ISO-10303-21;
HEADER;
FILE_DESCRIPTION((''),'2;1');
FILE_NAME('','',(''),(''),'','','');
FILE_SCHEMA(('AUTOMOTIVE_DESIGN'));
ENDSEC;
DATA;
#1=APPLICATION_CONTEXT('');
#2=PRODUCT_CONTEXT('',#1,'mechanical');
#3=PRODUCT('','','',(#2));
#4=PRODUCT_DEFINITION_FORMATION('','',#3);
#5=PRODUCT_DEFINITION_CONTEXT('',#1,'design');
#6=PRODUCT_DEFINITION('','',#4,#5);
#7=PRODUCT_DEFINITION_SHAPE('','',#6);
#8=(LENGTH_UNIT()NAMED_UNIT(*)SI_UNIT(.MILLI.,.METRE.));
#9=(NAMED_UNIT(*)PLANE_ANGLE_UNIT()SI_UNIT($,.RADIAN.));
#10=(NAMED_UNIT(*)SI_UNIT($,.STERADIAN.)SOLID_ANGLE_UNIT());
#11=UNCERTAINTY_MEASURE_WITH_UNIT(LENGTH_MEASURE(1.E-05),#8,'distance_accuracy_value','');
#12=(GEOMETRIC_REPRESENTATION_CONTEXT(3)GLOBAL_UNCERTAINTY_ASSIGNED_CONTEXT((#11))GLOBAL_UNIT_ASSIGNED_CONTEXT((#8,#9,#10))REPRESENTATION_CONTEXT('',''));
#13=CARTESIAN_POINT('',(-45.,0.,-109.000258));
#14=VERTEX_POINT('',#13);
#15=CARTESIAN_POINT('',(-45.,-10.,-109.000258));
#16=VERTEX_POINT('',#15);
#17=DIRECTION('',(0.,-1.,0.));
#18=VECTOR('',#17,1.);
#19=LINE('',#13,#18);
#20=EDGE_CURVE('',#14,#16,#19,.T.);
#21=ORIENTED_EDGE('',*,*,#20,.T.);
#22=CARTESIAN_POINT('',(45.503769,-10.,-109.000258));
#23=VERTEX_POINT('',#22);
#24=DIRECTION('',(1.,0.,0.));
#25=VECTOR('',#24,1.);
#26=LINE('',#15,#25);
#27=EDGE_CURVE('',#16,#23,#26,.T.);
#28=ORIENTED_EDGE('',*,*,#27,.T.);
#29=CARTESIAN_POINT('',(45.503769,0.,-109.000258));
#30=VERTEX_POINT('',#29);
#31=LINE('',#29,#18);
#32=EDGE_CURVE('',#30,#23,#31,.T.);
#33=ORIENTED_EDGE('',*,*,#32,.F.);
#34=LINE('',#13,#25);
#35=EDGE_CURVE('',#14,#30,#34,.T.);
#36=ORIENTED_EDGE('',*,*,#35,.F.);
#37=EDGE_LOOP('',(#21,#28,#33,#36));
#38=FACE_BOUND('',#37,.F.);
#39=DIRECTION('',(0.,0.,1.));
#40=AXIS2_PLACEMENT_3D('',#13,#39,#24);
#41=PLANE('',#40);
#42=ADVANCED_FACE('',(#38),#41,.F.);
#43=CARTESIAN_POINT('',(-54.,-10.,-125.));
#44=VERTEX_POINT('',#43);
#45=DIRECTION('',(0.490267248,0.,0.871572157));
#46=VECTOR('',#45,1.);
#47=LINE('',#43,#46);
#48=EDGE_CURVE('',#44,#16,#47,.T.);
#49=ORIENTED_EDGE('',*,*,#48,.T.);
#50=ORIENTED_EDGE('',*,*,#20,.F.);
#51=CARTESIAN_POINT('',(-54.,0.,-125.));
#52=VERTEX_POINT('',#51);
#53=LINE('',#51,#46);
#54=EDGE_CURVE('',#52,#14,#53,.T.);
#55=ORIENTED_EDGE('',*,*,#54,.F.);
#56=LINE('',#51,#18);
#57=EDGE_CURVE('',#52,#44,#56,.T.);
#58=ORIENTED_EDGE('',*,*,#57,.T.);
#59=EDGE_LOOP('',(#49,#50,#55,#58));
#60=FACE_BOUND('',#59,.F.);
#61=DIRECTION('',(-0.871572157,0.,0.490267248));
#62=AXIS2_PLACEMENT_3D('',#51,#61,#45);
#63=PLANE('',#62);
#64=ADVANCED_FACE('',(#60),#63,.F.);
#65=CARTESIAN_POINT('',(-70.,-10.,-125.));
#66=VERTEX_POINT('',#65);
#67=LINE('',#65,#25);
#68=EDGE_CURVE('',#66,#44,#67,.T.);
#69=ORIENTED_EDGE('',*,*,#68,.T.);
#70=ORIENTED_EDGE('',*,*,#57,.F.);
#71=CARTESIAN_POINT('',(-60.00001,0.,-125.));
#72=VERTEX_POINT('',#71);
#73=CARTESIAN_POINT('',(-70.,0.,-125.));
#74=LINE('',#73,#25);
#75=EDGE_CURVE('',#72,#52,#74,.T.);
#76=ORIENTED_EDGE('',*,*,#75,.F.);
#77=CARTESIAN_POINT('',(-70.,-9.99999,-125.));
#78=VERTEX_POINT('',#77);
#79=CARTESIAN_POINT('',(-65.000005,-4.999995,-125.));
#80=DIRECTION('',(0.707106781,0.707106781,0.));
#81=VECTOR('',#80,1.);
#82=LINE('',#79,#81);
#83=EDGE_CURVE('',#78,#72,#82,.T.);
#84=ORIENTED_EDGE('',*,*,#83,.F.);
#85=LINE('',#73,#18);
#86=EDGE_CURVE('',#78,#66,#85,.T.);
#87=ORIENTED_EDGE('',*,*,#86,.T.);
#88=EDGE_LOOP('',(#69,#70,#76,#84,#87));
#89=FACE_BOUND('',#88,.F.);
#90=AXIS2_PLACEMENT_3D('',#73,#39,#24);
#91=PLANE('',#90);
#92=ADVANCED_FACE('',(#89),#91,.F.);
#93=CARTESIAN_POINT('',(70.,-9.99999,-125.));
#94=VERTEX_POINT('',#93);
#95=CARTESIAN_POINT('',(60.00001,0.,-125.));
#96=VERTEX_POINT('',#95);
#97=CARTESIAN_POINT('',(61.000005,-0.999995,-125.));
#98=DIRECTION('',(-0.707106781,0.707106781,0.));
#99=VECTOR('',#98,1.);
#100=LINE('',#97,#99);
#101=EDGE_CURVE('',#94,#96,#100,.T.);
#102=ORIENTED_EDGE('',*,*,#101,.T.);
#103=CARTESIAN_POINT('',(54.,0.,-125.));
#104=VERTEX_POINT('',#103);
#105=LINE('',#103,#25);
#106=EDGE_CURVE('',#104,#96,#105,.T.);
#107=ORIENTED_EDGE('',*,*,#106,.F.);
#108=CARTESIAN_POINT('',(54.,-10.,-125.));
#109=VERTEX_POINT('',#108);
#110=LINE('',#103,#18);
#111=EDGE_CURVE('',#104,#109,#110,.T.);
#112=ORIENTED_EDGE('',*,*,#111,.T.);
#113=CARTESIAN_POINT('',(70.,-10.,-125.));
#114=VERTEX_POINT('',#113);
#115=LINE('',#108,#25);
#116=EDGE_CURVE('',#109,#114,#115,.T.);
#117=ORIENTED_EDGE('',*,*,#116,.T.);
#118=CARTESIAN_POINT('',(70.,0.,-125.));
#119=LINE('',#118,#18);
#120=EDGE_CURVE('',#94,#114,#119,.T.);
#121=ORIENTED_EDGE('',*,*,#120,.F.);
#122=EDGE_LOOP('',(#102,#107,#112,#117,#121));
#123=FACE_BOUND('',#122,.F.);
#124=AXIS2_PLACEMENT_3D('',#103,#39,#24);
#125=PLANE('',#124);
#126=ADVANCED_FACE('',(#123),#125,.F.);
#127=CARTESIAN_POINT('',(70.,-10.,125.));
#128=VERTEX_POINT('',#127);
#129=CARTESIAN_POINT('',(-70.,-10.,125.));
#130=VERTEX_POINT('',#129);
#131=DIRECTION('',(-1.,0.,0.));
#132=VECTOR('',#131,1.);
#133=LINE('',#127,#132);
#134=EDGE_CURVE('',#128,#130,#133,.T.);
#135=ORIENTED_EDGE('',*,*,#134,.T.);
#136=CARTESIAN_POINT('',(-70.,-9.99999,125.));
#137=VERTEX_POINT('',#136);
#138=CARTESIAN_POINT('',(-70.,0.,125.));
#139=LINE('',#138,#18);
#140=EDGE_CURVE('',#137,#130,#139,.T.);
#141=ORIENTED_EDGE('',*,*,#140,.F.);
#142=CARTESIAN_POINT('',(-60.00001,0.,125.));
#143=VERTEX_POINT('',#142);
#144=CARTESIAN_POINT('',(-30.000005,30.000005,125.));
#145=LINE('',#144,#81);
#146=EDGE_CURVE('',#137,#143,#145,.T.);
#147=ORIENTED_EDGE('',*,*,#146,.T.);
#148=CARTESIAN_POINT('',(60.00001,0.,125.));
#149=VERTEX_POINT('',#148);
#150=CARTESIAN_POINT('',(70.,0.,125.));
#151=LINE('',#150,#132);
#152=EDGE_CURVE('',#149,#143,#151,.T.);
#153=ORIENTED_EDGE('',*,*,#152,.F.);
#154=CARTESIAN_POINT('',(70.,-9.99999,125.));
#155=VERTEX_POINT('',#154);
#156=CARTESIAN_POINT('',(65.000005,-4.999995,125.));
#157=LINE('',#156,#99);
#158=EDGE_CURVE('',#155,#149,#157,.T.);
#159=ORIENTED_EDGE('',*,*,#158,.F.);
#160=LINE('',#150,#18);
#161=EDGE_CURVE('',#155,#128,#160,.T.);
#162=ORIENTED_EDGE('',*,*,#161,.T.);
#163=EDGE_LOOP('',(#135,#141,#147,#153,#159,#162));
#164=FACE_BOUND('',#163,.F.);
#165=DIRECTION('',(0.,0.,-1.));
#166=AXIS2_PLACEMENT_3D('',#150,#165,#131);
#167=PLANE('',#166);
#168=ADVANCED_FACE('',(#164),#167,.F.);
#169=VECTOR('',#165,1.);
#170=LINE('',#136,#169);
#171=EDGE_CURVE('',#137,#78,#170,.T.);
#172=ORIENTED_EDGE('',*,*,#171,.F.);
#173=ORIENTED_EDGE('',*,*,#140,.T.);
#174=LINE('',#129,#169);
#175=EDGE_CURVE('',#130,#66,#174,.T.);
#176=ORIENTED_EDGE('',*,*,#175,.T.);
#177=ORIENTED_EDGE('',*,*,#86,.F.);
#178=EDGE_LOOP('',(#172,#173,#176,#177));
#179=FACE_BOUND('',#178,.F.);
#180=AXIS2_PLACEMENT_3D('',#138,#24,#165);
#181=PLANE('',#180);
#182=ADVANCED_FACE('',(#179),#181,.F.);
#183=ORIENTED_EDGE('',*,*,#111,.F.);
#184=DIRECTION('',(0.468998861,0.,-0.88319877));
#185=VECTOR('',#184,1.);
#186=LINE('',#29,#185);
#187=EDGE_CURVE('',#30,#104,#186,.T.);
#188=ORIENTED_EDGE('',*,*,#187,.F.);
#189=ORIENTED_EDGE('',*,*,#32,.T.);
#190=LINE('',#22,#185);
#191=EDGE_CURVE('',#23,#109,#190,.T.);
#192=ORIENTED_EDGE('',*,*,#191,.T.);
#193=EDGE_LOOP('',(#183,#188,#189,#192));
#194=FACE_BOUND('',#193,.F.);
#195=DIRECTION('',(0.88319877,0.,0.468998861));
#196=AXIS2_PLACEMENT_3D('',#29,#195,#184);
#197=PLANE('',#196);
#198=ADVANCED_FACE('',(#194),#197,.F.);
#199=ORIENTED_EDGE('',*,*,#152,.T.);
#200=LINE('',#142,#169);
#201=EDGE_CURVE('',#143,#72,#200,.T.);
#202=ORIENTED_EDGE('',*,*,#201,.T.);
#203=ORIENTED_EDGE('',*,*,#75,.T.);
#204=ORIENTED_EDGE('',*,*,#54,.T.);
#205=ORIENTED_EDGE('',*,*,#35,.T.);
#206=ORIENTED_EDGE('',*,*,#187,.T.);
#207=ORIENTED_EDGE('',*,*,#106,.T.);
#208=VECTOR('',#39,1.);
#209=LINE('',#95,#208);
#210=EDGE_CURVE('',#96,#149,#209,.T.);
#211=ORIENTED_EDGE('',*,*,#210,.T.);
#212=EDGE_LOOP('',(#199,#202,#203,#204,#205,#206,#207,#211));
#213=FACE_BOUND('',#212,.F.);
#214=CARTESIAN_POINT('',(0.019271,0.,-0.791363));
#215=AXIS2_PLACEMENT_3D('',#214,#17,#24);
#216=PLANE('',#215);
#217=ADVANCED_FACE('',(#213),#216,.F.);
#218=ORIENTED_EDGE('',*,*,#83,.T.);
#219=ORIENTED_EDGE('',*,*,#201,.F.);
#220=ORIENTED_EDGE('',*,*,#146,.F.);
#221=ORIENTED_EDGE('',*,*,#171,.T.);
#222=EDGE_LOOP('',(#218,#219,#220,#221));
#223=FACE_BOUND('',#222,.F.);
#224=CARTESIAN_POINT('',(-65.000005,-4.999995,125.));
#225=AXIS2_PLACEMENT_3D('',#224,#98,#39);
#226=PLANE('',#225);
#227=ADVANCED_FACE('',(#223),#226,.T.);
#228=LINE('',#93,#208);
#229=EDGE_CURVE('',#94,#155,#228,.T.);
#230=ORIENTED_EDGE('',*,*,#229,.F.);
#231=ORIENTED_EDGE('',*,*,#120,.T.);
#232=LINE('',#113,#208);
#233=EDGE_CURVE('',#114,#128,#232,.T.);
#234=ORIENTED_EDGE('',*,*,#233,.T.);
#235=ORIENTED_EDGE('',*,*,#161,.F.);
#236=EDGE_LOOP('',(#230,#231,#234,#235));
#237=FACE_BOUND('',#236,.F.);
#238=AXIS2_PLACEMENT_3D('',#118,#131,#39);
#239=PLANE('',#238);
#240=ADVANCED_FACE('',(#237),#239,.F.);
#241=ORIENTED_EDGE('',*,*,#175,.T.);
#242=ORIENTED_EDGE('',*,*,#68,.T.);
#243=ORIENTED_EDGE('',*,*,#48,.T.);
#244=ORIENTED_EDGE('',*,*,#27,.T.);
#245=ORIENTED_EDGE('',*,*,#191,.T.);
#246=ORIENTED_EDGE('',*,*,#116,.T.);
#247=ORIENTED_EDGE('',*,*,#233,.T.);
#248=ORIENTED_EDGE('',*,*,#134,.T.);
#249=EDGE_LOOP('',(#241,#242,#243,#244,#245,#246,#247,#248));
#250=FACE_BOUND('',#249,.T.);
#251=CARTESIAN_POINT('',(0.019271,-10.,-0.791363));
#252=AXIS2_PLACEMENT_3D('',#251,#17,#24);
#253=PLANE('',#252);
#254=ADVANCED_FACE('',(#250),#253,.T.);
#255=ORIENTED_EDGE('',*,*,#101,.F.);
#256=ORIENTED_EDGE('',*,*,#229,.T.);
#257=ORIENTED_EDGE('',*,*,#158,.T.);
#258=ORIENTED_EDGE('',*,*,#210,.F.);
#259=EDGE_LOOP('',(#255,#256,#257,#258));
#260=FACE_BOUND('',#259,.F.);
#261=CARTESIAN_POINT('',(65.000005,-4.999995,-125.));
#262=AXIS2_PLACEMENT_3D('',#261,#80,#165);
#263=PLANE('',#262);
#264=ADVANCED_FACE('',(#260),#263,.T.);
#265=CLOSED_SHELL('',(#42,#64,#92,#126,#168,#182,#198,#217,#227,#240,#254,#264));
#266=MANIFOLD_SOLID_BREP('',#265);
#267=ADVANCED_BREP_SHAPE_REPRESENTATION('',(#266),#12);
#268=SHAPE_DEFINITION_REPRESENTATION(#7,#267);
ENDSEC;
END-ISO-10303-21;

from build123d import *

# Parameters (mm, degrees)
F1_DEPTH = 10
F2_SIZE  = 9.99999


# Not quite as in the source:
# - a fillet or chamfer is up to 0.001 mm smaller than in the source, because OpenCascade refuses the exact size


with BuildPart() as f1:
    # F0 (on Front) → F1 (new body)
    with BuildSketch(Plane.XZ):
        Polygon((70, -108.8627894558), (70, 125), (-70, 125), (-70, -125), (-54, -125), (-45, -109.0002581477), (45.5037690699, -109.0002581477), (54, -125), (70, -125), align=None)
    extrude(amount=F1_DEPTH)

    # F2 (size 10 in the source; OpenCascade refuses exactly that, so slightly less here)
    f2_edges = [f1.edges().sort_by_distance(p)[0] for p in [
        (-70, 0, 0),
        (70, 0, 0),
    ]]
    chamfer(f2_edges, length=F2_SIZE)


solid = f1.part
